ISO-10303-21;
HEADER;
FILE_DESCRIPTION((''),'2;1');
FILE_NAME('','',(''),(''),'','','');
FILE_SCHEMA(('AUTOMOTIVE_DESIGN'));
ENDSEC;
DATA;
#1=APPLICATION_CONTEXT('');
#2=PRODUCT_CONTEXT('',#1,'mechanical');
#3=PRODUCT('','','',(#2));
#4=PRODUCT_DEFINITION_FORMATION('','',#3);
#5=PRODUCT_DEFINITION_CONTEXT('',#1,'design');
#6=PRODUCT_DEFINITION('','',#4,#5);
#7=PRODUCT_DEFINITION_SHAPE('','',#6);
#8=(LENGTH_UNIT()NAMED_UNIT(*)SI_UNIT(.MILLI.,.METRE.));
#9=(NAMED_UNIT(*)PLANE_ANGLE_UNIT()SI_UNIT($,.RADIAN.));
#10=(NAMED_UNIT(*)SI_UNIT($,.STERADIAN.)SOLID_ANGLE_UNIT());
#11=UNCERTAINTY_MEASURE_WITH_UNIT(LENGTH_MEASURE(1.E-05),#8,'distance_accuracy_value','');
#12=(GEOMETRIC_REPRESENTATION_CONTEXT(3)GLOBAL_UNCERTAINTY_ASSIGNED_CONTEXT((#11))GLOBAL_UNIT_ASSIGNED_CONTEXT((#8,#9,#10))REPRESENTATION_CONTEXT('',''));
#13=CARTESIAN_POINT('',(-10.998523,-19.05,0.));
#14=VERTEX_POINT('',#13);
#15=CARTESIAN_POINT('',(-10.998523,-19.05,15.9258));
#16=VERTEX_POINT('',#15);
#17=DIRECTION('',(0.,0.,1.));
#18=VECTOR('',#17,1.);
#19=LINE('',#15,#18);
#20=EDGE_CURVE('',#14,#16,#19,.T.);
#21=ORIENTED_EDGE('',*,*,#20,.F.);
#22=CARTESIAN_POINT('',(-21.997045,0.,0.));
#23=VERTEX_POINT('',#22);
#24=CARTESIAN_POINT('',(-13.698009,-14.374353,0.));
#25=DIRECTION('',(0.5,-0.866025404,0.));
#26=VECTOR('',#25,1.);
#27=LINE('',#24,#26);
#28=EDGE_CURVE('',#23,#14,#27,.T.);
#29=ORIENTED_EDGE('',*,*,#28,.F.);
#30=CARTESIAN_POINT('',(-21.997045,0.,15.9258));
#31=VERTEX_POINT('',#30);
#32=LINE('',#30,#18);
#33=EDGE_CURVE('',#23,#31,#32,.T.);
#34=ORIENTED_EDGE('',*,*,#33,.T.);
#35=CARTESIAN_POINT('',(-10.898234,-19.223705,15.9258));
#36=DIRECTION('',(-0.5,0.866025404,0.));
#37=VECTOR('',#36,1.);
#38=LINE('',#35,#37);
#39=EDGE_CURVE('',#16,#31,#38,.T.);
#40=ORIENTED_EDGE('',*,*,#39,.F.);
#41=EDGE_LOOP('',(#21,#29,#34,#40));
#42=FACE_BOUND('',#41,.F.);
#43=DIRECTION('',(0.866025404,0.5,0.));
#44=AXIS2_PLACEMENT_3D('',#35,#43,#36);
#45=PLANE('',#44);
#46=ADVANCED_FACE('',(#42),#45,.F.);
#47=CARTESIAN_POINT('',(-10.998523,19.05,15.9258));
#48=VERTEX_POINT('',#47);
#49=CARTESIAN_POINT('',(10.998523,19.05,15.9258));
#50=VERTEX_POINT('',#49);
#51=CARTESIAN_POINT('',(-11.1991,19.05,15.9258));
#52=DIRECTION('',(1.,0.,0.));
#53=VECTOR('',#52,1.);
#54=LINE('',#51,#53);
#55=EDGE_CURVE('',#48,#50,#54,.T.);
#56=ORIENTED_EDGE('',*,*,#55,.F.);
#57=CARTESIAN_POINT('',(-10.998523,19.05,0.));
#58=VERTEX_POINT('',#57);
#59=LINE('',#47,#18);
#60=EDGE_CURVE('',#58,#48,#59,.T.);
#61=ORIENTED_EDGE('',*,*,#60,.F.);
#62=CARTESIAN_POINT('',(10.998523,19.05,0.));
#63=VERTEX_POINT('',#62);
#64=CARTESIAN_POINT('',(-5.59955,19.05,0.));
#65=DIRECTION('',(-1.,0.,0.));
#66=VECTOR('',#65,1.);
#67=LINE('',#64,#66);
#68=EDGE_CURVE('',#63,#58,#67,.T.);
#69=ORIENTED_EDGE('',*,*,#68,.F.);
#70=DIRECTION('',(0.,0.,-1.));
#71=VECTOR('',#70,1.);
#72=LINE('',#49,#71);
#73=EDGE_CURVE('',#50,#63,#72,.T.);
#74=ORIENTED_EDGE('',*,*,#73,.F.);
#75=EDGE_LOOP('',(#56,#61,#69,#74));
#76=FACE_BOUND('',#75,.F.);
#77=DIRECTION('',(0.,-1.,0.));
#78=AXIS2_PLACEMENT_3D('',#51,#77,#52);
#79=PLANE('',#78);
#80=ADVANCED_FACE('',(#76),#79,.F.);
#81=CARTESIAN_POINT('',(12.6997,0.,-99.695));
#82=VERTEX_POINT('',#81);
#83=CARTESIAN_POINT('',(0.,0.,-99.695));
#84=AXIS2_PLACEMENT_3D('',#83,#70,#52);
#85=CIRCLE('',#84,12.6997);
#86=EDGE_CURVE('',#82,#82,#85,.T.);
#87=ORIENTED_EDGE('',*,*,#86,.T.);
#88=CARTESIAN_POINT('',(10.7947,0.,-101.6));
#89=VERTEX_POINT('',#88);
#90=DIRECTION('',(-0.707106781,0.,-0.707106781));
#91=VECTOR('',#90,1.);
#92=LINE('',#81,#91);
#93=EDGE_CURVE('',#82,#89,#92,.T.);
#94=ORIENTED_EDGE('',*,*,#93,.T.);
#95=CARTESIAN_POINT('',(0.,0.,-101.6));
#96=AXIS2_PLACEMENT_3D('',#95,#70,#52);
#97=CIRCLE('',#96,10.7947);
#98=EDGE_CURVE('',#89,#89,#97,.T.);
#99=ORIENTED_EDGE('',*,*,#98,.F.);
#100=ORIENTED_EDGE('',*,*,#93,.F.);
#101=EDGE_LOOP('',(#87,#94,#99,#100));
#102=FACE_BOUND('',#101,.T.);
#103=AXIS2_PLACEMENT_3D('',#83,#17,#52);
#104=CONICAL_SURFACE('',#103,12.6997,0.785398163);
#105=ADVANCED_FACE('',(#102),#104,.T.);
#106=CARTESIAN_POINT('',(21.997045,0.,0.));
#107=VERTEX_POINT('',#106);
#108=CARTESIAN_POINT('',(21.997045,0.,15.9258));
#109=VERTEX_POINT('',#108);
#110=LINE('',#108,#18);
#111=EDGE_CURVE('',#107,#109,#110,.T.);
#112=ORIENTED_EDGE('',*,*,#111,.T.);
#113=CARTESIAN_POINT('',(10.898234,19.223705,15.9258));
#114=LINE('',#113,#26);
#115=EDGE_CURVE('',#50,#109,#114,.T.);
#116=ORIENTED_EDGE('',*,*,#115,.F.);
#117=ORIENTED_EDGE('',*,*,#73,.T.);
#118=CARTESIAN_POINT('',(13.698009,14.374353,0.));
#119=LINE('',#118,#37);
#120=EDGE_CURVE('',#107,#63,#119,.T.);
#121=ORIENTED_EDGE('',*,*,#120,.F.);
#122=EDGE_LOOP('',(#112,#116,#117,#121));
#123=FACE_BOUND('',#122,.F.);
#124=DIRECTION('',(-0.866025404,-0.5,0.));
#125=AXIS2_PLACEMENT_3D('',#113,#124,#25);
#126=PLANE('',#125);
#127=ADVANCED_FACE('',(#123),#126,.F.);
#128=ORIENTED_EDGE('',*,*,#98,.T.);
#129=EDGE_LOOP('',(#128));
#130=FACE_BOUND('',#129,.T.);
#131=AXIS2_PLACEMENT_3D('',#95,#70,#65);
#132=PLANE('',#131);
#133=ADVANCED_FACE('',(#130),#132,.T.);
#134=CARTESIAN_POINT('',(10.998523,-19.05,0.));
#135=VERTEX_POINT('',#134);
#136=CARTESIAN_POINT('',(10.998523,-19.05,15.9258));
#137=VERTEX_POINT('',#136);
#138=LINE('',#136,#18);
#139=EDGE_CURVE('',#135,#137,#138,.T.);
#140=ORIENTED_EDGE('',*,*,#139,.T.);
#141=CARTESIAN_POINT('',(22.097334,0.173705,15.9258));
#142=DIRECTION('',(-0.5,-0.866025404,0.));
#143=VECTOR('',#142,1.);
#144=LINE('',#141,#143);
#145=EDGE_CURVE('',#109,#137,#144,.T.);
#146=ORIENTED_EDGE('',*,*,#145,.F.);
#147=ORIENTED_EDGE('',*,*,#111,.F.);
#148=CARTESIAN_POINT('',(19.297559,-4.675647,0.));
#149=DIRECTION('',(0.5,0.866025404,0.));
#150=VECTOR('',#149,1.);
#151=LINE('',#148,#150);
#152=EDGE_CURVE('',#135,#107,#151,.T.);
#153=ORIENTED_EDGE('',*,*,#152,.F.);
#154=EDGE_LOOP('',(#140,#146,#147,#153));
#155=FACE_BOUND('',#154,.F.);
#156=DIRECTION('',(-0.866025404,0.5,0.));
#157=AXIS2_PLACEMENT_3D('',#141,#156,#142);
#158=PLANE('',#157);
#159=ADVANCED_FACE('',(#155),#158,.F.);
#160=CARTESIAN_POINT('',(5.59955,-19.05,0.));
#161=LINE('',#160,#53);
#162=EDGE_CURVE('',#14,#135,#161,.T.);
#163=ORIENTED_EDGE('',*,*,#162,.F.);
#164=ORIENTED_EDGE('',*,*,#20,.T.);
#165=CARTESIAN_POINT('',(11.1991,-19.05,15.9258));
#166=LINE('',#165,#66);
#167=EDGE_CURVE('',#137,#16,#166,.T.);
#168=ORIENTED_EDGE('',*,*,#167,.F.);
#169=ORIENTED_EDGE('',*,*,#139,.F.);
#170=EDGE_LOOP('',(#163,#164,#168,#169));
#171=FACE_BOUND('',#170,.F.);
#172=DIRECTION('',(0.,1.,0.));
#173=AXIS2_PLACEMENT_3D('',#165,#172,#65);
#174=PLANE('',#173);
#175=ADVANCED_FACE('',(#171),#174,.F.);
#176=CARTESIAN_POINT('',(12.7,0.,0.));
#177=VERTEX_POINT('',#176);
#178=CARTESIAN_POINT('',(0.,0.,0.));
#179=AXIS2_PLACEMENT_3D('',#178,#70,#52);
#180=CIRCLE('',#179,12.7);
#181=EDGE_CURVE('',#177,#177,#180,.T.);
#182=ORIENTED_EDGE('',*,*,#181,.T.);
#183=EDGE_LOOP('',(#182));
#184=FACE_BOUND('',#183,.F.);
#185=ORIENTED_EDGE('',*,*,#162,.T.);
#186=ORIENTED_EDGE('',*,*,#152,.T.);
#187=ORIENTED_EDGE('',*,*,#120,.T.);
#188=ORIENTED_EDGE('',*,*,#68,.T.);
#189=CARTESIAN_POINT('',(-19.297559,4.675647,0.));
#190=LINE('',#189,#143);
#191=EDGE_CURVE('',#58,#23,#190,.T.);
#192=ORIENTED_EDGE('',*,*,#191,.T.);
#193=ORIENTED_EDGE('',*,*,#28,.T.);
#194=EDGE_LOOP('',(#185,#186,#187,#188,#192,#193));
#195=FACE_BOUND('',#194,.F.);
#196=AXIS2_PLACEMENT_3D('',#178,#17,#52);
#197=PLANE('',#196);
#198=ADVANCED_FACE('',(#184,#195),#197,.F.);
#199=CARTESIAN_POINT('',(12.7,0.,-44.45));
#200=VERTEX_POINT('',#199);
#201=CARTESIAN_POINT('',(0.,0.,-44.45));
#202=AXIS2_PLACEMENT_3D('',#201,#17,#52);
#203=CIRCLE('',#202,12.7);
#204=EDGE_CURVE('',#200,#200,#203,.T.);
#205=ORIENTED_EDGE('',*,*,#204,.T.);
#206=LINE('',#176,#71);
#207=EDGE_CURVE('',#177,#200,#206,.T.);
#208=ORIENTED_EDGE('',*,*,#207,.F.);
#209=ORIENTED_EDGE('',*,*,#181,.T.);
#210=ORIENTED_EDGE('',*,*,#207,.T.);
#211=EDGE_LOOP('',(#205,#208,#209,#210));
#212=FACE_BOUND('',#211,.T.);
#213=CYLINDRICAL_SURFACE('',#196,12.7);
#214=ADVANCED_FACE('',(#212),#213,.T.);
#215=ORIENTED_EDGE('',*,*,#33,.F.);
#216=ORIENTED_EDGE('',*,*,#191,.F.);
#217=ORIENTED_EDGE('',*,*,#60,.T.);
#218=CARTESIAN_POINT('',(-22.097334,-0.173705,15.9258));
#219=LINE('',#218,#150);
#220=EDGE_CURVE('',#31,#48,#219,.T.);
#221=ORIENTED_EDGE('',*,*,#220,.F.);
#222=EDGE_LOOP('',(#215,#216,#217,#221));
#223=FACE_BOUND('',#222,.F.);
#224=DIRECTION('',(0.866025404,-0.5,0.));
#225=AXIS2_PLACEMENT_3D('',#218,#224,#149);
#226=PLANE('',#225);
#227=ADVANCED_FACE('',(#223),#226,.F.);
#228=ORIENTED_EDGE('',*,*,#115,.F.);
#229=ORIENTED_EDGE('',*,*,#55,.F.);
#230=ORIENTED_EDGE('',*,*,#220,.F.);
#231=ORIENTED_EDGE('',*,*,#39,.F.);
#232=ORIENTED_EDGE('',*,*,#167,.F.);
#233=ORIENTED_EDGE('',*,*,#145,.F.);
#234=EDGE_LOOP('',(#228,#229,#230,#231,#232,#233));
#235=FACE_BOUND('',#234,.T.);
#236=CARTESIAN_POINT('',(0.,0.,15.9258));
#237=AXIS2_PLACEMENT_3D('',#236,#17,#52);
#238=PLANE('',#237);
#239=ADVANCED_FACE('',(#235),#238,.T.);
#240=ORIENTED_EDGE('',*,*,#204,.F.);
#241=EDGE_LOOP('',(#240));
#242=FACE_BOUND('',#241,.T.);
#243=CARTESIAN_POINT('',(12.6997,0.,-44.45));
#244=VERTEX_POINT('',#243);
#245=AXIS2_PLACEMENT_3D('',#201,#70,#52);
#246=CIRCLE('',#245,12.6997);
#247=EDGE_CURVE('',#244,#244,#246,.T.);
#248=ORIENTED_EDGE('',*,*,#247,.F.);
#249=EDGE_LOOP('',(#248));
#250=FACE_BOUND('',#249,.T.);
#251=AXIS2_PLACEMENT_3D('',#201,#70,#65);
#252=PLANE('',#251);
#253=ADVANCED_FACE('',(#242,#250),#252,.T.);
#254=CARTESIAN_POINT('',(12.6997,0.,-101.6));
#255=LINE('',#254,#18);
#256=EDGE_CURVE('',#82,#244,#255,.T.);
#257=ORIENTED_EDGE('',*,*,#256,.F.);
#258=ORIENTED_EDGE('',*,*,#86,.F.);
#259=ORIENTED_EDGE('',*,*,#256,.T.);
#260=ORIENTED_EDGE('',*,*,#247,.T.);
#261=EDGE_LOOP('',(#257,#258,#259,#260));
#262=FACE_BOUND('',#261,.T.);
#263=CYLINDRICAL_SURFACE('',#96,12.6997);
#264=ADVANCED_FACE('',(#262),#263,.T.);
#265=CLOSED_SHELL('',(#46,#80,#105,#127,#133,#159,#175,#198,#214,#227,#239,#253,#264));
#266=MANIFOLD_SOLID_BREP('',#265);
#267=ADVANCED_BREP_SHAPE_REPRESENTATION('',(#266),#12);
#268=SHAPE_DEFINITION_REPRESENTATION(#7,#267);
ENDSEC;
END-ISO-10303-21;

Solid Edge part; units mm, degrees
sketch "Sketch1" plane through (0, 0, 0) normal (0, 0, 1) x (1, 0, 0)
  circle A0 centre (0, 0) radius 22.098
  dimension "D1" = 44.196
extrude "Protrusion1" add sketch "Sketch1" along normal blind 15.9258
sketch "Sketch2" plane through (0, 0, 0) normal (0, 0, -1) x (1, 0, 0)
  circle A0 centre (0, 0) radius 12.7
extrude "Protrusion2" add sketch "Sketch2" along normal blind 101.6
sketch "Sketch3" plane through (0, 0, -101.6) normal (0, 0, -1) x (1, 0, 0)
  circle A0 centre (0, 0) radius 12.6997
extrude "Cutout1" cut sketch "Sketch3" against normal blind 57.15 flip side to cut
chamfer "Chamfer_1" distance 1.905 angle 45 1 edges at (-12.6997, 0, -101.6)
sketch "Sketch4" plane through (0, 0, 15.9258) normal (0, 0, 1) x (1, 0, 0)
  line L0 (-11.1991, 19.05) -> (11.1991, 19.05)
  dimension "D1" = 38.1
extrude "Cutout2" cut sketch "Sketch4" against normal up to next material side at (0, 19.1, 15.9258)
pattern_circular "Pattern1" count 6 over 360 about axis through (0, 0, 15.9258) along (0, 0, 1) of "Cutout2"
properties part number "24103917"
